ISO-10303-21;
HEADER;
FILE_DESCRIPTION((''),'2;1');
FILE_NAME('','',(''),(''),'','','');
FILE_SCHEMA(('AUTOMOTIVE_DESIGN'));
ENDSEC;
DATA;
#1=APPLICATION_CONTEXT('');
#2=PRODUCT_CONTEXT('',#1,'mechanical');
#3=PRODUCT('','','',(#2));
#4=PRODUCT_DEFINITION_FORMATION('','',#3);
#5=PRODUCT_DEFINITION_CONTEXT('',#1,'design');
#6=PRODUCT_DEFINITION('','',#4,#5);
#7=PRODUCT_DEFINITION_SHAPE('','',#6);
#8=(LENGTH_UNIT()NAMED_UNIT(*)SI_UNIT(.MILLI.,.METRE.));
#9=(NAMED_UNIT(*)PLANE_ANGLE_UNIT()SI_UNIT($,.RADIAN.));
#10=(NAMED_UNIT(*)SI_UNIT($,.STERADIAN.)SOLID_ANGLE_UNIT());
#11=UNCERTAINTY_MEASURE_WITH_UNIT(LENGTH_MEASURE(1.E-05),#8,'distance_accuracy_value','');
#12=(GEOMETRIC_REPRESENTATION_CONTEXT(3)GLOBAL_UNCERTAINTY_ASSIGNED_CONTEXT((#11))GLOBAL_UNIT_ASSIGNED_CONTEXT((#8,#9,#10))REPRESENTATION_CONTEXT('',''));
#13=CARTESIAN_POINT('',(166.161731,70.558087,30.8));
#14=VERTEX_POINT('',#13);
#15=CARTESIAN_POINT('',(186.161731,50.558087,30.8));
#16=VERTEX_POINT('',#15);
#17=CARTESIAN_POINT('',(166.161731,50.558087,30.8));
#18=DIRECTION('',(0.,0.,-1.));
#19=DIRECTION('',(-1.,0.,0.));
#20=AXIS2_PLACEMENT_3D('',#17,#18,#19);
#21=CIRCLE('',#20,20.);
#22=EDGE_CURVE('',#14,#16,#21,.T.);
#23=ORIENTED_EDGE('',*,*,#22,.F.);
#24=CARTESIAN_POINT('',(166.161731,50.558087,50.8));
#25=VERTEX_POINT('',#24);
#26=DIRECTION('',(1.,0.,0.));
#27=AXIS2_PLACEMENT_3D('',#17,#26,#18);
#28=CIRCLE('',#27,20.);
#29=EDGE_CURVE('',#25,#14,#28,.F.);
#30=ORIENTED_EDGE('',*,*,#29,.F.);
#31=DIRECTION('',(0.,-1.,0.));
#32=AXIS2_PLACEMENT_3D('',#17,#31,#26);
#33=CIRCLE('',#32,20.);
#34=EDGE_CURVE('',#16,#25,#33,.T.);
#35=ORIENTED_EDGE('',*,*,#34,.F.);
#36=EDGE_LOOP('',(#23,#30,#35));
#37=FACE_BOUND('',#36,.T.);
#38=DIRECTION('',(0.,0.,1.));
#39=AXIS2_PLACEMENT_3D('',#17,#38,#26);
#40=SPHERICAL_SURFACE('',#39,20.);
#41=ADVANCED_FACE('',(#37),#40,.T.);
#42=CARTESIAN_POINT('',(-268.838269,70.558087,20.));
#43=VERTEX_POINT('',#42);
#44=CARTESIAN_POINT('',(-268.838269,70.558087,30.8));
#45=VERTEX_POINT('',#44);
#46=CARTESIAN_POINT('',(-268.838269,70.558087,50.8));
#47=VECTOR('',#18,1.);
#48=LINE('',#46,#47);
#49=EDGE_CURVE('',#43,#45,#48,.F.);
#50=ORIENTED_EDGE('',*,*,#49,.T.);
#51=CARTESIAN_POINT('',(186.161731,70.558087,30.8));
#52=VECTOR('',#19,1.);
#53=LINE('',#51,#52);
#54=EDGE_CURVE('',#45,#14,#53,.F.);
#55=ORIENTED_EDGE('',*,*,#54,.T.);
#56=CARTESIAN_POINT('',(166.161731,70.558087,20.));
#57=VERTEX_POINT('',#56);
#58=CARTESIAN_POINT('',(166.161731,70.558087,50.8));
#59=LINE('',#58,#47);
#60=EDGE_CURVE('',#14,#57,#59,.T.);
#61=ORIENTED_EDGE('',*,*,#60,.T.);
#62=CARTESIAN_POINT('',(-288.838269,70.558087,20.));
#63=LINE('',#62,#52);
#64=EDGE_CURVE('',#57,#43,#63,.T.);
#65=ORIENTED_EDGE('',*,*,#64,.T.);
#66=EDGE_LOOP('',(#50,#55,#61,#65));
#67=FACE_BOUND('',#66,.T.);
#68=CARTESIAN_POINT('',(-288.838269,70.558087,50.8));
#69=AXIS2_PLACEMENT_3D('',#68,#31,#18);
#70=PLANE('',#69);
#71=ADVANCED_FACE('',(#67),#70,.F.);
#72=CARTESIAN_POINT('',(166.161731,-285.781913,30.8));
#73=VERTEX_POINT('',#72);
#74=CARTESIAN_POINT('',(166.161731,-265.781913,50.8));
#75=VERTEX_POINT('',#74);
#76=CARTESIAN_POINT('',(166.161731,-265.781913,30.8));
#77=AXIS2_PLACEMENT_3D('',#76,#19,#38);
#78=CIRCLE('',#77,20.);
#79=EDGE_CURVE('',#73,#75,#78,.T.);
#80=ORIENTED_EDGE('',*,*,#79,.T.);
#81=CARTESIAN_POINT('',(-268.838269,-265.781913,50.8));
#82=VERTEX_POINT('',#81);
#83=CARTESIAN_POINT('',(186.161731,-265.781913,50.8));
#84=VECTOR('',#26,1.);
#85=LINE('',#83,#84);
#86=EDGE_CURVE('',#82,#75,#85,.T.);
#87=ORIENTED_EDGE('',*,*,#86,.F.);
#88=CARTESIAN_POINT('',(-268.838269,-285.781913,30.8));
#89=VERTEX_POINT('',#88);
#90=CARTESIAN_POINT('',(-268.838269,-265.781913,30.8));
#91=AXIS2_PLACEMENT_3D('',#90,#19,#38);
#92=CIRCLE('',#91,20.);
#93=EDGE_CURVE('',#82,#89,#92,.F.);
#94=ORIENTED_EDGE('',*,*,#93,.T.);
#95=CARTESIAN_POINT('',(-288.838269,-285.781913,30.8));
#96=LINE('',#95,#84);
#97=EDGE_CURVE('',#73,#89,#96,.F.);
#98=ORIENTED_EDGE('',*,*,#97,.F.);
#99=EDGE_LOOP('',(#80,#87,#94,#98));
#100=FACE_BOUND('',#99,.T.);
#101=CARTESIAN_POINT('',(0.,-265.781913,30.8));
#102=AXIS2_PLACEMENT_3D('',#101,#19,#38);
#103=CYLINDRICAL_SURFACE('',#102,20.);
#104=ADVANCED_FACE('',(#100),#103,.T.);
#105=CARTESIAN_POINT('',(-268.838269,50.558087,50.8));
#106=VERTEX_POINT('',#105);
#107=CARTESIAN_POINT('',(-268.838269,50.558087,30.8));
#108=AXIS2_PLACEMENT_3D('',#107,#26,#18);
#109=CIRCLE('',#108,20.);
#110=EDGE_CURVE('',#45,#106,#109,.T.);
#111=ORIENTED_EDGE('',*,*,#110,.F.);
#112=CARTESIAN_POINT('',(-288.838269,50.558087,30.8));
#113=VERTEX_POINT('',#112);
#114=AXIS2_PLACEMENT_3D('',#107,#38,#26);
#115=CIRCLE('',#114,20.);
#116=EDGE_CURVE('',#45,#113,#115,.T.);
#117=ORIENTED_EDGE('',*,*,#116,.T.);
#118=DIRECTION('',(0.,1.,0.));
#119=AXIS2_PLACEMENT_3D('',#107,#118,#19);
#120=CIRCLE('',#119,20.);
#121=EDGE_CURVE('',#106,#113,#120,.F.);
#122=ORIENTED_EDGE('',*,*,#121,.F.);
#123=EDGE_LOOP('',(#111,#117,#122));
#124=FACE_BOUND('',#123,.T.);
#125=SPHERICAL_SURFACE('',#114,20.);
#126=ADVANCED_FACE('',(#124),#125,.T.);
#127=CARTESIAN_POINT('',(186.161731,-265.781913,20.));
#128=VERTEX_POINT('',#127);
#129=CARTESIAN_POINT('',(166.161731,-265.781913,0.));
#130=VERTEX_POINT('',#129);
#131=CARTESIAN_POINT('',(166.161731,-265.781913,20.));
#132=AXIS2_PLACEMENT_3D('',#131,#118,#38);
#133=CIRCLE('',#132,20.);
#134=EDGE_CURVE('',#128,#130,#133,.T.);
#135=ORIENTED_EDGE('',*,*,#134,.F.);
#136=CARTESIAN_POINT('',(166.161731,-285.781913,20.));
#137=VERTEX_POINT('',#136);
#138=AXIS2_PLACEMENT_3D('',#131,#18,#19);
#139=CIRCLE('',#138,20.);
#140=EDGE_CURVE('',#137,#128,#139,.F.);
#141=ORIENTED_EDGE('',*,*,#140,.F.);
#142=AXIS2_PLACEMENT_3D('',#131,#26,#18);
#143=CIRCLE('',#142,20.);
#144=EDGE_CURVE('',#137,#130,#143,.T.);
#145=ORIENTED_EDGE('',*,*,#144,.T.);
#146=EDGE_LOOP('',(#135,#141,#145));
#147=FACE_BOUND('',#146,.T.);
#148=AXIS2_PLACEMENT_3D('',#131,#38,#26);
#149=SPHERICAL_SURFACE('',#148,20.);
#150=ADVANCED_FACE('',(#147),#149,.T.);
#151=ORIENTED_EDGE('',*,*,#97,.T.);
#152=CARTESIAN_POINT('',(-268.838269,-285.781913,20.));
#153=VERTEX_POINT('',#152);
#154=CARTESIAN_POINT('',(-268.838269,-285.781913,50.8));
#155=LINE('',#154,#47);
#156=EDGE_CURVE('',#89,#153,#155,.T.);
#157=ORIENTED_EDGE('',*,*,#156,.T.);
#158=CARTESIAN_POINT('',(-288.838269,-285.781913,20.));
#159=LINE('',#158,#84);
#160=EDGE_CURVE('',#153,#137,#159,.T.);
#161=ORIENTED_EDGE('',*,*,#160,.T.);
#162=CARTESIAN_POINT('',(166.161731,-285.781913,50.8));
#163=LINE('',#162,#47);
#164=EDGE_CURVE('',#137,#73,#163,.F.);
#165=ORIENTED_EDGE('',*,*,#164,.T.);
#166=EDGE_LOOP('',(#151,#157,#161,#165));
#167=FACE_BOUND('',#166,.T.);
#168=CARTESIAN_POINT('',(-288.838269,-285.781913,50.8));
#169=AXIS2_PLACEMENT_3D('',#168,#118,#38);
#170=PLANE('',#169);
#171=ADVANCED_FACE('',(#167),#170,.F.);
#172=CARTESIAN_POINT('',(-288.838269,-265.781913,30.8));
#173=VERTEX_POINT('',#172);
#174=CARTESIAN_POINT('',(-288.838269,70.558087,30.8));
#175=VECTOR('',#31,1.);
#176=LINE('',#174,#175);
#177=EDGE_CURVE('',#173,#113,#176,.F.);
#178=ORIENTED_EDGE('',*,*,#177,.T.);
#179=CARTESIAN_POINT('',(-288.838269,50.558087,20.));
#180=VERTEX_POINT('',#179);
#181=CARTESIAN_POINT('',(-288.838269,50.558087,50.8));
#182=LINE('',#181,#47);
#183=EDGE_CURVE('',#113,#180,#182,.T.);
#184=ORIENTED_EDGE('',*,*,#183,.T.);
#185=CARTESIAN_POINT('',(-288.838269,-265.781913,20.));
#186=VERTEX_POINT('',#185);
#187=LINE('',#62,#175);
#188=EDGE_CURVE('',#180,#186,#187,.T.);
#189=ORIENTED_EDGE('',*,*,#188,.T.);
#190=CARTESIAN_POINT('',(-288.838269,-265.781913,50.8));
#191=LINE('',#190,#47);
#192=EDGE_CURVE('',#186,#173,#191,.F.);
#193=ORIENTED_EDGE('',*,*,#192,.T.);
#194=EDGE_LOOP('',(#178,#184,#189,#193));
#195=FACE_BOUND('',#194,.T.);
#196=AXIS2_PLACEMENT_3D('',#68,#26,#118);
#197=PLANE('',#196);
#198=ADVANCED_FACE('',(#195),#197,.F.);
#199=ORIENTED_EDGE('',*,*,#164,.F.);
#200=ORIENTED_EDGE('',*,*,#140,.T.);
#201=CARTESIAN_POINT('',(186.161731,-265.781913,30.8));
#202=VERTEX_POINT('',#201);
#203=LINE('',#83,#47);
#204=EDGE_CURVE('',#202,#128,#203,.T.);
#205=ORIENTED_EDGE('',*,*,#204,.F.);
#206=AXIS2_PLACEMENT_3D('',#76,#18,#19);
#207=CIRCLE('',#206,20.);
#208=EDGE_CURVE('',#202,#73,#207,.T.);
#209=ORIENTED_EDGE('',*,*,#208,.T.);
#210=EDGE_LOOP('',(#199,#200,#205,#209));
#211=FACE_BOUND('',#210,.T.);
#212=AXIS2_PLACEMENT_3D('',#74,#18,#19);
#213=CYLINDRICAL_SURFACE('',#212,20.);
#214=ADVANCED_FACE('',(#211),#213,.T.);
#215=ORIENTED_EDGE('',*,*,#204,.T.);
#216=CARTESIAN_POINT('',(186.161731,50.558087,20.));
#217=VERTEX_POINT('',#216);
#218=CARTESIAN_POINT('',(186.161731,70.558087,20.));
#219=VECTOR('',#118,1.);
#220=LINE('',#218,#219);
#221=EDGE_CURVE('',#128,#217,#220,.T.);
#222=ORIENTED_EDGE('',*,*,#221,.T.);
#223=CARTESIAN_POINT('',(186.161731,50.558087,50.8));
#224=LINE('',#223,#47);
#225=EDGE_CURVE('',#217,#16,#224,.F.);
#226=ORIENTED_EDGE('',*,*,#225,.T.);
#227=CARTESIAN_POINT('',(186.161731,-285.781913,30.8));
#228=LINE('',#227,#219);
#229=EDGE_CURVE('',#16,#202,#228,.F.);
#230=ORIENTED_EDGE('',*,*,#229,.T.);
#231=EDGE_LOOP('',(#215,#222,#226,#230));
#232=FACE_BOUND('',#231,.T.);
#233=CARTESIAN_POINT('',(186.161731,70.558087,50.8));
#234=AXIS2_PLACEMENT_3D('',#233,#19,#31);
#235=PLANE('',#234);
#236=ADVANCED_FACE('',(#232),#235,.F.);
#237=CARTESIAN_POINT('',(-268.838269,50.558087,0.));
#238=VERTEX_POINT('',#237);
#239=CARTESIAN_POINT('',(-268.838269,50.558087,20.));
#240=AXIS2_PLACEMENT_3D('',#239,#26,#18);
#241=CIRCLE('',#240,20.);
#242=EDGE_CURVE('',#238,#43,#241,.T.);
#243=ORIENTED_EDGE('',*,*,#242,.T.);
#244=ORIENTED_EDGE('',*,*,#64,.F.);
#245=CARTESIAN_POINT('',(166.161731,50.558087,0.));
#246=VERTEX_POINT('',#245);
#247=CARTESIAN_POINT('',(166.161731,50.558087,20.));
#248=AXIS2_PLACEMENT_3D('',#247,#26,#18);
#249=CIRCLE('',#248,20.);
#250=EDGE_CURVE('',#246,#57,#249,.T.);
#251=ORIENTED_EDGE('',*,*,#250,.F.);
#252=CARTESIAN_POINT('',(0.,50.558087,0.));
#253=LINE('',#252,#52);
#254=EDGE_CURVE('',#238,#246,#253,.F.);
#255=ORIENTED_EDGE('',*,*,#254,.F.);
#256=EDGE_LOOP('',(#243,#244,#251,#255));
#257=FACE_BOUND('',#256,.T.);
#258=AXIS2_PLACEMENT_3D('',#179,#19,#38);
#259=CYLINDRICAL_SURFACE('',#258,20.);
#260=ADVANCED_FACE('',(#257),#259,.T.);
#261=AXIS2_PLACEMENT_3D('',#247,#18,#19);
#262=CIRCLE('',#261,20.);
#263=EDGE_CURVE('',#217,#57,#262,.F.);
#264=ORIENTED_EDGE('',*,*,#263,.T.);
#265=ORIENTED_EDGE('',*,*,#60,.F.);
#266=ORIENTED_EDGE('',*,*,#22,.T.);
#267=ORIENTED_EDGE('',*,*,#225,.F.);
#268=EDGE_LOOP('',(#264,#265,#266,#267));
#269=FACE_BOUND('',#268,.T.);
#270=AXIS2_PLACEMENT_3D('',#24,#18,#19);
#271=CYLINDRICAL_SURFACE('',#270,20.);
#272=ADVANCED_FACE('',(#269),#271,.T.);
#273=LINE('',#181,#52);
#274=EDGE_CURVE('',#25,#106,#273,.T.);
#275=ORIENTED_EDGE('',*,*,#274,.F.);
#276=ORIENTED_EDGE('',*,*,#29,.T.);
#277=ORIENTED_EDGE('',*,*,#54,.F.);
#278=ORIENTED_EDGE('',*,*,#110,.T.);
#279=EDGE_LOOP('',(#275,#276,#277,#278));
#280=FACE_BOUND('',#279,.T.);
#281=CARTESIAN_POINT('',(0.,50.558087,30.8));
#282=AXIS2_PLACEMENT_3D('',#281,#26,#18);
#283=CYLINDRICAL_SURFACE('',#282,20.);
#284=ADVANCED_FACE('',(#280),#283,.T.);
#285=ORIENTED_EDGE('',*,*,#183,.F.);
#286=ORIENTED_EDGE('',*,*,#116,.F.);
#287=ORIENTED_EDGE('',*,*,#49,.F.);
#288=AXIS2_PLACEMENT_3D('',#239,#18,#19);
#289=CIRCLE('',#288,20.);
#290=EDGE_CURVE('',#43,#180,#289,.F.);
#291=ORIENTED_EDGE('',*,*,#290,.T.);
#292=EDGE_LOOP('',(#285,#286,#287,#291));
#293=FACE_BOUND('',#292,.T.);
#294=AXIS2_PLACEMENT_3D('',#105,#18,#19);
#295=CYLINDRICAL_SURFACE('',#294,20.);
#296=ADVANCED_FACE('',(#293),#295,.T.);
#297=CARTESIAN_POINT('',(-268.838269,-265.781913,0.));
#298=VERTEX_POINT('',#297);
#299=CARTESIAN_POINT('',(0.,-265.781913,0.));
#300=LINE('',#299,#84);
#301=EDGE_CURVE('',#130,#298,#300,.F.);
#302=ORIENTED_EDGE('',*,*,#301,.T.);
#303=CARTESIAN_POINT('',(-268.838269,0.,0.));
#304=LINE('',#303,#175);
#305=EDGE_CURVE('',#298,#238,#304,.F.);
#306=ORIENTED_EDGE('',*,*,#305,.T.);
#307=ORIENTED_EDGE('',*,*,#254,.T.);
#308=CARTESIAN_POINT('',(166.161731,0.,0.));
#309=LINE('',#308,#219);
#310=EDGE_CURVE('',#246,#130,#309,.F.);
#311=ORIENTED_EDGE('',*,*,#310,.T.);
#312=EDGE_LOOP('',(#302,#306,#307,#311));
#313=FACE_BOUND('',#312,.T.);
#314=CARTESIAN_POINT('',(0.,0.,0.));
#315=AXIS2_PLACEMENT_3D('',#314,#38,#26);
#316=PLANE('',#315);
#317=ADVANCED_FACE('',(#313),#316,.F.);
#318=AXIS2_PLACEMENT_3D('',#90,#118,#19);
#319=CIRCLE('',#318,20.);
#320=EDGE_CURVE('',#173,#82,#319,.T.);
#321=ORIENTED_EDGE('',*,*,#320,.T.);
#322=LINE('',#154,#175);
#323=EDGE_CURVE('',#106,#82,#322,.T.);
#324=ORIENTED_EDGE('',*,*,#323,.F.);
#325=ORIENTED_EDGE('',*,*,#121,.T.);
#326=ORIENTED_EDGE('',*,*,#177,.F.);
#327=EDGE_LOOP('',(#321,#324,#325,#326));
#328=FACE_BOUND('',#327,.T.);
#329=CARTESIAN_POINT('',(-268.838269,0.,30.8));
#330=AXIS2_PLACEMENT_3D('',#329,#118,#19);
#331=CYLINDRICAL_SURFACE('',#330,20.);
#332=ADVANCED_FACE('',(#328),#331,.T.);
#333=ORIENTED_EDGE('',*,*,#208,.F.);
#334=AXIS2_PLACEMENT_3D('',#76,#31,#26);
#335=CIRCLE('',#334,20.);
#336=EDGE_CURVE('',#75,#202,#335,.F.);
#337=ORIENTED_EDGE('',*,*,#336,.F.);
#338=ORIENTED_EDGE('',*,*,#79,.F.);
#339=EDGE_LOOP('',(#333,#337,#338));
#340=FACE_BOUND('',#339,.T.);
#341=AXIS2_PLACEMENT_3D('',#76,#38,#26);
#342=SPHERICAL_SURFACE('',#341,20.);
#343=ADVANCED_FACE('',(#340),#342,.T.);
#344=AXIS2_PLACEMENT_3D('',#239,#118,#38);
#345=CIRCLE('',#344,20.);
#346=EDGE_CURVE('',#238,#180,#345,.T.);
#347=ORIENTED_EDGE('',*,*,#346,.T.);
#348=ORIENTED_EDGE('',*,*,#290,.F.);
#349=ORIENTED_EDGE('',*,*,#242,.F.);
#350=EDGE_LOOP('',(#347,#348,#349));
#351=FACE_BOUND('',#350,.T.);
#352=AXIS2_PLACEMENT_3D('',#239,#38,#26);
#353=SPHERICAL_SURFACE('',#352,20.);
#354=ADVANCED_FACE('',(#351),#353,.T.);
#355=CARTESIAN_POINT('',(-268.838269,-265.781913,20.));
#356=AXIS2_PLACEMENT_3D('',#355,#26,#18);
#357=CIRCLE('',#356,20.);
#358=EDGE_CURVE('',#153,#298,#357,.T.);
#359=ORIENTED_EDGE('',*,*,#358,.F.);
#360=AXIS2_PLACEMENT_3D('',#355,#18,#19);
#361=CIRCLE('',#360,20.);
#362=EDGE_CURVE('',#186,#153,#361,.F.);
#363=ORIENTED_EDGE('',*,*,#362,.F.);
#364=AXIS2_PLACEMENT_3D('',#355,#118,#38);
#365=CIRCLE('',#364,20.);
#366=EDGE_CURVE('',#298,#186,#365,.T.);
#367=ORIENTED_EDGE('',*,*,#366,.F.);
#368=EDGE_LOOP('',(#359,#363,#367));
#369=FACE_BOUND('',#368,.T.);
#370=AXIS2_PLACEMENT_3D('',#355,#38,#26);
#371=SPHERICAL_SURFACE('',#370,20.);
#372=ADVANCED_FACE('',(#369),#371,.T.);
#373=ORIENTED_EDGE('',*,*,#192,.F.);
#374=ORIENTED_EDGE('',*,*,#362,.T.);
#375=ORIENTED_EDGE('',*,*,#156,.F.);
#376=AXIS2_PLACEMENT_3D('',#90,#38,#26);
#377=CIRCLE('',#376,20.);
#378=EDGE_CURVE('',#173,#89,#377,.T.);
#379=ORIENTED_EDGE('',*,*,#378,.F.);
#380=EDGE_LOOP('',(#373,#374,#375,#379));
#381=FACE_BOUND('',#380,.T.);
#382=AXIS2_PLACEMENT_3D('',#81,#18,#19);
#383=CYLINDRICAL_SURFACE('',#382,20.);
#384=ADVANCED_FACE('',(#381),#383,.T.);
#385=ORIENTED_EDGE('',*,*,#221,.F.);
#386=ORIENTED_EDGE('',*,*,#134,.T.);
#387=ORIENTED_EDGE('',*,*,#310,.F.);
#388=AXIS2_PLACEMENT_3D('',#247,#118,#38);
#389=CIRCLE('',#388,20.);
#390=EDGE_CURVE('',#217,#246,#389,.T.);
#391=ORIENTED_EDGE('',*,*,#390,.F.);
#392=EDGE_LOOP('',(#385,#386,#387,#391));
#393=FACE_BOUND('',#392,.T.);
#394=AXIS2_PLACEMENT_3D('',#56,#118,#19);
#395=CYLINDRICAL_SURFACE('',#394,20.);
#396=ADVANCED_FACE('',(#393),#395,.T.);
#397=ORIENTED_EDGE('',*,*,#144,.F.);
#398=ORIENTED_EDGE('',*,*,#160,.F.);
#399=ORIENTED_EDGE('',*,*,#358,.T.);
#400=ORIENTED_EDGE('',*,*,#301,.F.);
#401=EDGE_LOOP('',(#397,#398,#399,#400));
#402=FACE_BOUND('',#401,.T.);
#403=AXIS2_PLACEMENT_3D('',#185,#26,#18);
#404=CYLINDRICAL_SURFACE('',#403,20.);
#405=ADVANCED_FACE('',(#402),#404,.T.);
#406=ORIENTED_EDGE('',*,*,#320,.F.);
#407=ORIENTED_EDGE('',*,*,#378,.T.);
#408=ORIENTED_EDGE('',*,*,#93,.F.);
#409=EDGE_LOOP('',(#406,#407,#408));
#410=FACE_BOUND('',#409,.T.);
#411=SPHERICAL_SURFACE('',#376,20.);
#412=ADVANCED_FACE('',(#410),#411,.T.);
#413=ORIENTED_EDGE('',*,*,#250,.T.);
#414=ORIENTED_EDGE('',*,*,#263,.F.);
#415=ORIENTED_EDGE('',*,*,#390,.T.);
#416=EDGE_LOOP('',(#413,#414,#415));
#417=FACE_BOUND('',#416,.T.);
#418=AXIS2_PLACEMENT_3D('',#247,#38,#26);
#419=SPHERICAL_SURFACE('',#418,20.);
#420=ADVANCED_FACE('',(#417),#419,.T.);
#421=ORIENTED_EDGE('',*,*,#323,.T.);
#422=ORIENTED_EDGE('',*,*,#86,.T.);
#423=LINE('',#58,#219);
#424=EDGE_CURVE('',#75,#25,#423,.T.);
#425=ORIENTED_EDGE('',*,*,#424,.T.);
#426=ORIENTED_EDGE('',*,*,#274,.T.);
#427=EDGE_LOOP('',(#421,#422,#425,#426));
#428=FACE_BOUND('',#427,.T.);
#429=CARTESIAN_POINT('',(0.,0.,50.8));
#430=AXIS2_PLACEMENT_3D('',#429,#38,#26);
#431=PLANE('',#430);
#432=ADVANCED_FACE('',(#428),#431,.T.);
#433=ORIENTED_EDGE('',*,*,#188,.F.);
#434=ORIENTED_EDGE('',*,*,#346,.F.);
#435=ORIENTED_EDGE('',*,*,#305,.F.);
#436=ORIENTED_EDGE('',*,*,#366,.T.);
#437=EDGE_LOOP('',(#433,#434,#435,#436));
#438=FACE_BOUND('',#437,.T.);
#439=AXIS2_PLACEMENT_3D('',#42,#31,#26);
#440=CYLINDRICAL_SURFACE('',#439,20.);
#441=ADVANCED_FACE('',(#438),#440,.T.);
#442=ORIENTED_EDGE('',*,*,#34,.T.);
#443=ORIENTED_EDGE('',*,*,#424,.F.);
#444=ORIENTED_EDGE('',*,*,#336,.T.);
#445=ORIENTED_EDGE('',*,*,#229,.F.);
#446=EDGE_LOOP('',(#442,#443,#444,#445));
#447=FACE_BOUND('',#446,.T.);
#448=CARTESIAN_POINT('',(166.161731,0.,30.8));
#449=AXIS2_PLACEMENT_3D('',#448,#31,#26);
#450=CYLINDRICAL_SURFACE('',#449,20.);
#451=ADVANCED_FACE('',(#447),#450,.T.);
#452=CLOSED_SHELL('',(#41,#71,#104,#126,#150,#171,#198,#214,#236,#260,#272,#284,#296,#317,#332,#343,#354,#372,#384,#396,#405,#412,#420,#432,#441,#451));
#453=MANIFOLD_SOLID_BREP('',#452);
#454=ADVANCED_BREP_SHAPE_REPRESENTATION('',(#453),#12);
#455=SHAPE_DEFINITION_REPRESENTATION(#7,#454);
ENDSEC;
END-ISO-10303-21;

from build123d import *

# Parameters (mm, degrees)
SKETCH1_W           = 475
SKETCH1_H           = 356.34
BOSS_EXTRUDE1_DEPTH = 50.8
FILLET2_R           = 20
FILLET6_R           = 20
FILLET7_R           = 20


with BuildPart() as part:
    # Sketch1 → Boss-Extrude1 (new body)
    with BuildSketch(Plane.XY):
        with Locations((-51.338268793, -107.61191344)):
            Rectangle(SKETCH1_W, SKETCH1_H)
    extrude(amount=BOSS_EXTRUDE1_DEPTH)

    # Fillet2
    fillet2_edges = [part.edges().sort_by_distance(p)[0] for p in [
        (186.161731207, -107.61191344, 50.8),
        (-51.338268793, 70.55808656, 50.8),
        (-288.838268793, -107.61191344, 50.8),
        (-51.338268793, -285.78191344, 50.8),
    ]]
    fillet(fillet2_edges, radius=FILLET2_R)

    # Fillet6
    # the kernel refuses this fillet: 20 mm, written as the material it takes off along each edge
    with BuildSketch(Plane(origin=(166.161731207, 50.55808656, 30.8), x_dir=(1, 0, 0), z_dir=(0, 1, 0))) as fillet6_piece_1_section:
        Polygon((0, 0), (FILLET6_R * 1.02, 0), (FILLET6_R * 1.02, -FILLET6_R * 1.02), (0, -FILLET6_R * 1.02), align=None)
    fillet6_piece_1 = extrude(amount=FILLET6_R * 1.02, mode=Mode.PRIVATE)
    fillet6_piece_1 = fillet6_piece_1 - Plane(origin=(166.161731207, 50.55808656, 30.8), x_dir=(-0.7071067811865475, 0, -0.7071067811865475), z_dir=(0, 1, 0)) * Sphere(FILLET6_R, mode=Mode.PRIVATE)
    add(fillet6_piece_1, mode=Mode.SUBTRACT)
    with BuildSketch(Plane(origin=(166.161731207, -265.78191344, 30.8), x_dir=(0, -1, 0), z_dir=(1, 0, 0))) as fillet6_piece_2_section:
        Polygon((0, 0), (FILLET6_R * 1.02, 0), (FILLET6_R * 1.02, -FILLET6_R * 1.02), (0, -FILLET6_R * 1.02), align=None)
    fillet6_piece_2 = extrude(amount=FILLET6_R * 1.02, mode=Mode.PRIVATE)
    fillet6_piece_2 = fillet6_piece_2 - Plane(origin=(166.161731207, -265.78191344, 30.8), x_dir=(0, 0.7071067811865475, -0.7071067811865475), z_dir=(1, 0, 0)) * Sphere(FILLET6_R, mode=Mode.PRIVATE)
    add(fillet6_piece_2, mode=Mode.SUBTRACT)
    with BuildSketch(Plane(origin=(-268.838268793, 50.55808656, 30.8), x_dir=(-1, 0, 0), z_dir=(0, 1, 0))) as fillet6_piece_3_section:
        Polygon((0, 0), (FILLET6_R * 1.02, 0), (FILLET6_R * 1.02, FILLET6_R * 1.02), (0, FILLET6_R * 1.02), align=None)
    fillet6_piece_3 = extrude(amount=FILLET6_R * 1.02, mode=Mode.PRIVATE)
    fillet6_piece_3 = fillet6_piece_3 - Plane(origin=(-268.838268793, 50.55808656, 30.8), x_dir=(0.7071067811865475, 0, -0.7071067811865475), z_dir=(0, 1, 0)) * Sphere(FILLET6_R, mode=Mode.PRIVATE)
    add(fillet6_piece_3, mode=Mode.SUBTRACT)
    with BuildSketch(Plane(origin=(-268.838268793, -265.78191344, 30.8), x_dir=(0, -1, 0), z_dir=(-1, 0, 0))) as fillet6_piece_4_section:
        Polygon((0, 0), (FILLET6_R * 1.02, 0), (FILLET6_R * 1.02, FILLET6_R * 1.02), (0, FILLET6_R * 1.02), align=None)
    fillet6_piece_4 = extrude(amount=FILLET6_R * 1.02, mode=Mode.PRIVATE)
    fillet6_piece_4 = fillet6_piece_4 - Plane(origin=(-268.838268793, -265.78191344, 30.8), x_dir=(0, 0.7071067811865475, -0.7071067811865475), z_dir=(-1, 0, 0)) * Sphere(FILLET6_R, mode=Mode.PRIVATE)
    add(fillet6_piece_4, mode=Mode.SUBTRACT)
    with BuildSketch(Plane(origin=(-288.838268793, -285.78191344, -50), x_dir=(0, 1, 0), z_dir=(0, 0, 1)), Plane(origin=(-288.838268793, 70.55808656, -50), x_dir=(1, 0, 0), z_dir=(0, 0, 1))) as fillet6_piece_5:
        with BuildLine():
            CenterArc((FILLET6_R, -FILLET6_R), FILLET6_R, 90, 90)
            Line((0, -FILLET6_R), (0, 0))
            Line((0, 0), (FILLET6_R, 0))
        make_face()
    extrude(amount=80.8, mode=Mode.SUBTRACT)
    with BuildSketch(Plane(origin=(186.161731207, -285.78191344, -50), x_dir=(0, 1, 0), z_dir=(0, 0, 1)), Plane(origin=(186.161731207, 70.55808656, -50), x_dir=(-1, 0, 0), z_dir=(0, 0, 1))) as fillet6_piece_6:
        with BuildLine():
            CenterArc((FILLET6_R, FILLET6_R), FILLET6_R, 180, 90)
            Line((0, FILLET6_R), (0, 0))
            Line((0, 0), (FILLET6_R, 0))
        make_face()
    extrude(amount=80.8, mode=Mode.SUBTRACT)

    # Fillet7
    fillet7_edges = [part.edges().sort_by_distance(p)[0] for p in [
        (-51.338268793, 70.55808656, 0),
        (-288.838268793, -107.61191344, 0),
        (186.161731207, -107.61191344, 0),
        (-51.338268793, -285.78191344, 0),
        (-282.980404416, 64.700222184, 0),
        (-282.980404416, -279.924049063, 0),
        (180.303866831, -279.924049063, 0),
        (180.303866831, 64.700222184, 0),
    ]]
    fillet(fillet7_edges, radius=FILLET7_R)


solid = part.part
